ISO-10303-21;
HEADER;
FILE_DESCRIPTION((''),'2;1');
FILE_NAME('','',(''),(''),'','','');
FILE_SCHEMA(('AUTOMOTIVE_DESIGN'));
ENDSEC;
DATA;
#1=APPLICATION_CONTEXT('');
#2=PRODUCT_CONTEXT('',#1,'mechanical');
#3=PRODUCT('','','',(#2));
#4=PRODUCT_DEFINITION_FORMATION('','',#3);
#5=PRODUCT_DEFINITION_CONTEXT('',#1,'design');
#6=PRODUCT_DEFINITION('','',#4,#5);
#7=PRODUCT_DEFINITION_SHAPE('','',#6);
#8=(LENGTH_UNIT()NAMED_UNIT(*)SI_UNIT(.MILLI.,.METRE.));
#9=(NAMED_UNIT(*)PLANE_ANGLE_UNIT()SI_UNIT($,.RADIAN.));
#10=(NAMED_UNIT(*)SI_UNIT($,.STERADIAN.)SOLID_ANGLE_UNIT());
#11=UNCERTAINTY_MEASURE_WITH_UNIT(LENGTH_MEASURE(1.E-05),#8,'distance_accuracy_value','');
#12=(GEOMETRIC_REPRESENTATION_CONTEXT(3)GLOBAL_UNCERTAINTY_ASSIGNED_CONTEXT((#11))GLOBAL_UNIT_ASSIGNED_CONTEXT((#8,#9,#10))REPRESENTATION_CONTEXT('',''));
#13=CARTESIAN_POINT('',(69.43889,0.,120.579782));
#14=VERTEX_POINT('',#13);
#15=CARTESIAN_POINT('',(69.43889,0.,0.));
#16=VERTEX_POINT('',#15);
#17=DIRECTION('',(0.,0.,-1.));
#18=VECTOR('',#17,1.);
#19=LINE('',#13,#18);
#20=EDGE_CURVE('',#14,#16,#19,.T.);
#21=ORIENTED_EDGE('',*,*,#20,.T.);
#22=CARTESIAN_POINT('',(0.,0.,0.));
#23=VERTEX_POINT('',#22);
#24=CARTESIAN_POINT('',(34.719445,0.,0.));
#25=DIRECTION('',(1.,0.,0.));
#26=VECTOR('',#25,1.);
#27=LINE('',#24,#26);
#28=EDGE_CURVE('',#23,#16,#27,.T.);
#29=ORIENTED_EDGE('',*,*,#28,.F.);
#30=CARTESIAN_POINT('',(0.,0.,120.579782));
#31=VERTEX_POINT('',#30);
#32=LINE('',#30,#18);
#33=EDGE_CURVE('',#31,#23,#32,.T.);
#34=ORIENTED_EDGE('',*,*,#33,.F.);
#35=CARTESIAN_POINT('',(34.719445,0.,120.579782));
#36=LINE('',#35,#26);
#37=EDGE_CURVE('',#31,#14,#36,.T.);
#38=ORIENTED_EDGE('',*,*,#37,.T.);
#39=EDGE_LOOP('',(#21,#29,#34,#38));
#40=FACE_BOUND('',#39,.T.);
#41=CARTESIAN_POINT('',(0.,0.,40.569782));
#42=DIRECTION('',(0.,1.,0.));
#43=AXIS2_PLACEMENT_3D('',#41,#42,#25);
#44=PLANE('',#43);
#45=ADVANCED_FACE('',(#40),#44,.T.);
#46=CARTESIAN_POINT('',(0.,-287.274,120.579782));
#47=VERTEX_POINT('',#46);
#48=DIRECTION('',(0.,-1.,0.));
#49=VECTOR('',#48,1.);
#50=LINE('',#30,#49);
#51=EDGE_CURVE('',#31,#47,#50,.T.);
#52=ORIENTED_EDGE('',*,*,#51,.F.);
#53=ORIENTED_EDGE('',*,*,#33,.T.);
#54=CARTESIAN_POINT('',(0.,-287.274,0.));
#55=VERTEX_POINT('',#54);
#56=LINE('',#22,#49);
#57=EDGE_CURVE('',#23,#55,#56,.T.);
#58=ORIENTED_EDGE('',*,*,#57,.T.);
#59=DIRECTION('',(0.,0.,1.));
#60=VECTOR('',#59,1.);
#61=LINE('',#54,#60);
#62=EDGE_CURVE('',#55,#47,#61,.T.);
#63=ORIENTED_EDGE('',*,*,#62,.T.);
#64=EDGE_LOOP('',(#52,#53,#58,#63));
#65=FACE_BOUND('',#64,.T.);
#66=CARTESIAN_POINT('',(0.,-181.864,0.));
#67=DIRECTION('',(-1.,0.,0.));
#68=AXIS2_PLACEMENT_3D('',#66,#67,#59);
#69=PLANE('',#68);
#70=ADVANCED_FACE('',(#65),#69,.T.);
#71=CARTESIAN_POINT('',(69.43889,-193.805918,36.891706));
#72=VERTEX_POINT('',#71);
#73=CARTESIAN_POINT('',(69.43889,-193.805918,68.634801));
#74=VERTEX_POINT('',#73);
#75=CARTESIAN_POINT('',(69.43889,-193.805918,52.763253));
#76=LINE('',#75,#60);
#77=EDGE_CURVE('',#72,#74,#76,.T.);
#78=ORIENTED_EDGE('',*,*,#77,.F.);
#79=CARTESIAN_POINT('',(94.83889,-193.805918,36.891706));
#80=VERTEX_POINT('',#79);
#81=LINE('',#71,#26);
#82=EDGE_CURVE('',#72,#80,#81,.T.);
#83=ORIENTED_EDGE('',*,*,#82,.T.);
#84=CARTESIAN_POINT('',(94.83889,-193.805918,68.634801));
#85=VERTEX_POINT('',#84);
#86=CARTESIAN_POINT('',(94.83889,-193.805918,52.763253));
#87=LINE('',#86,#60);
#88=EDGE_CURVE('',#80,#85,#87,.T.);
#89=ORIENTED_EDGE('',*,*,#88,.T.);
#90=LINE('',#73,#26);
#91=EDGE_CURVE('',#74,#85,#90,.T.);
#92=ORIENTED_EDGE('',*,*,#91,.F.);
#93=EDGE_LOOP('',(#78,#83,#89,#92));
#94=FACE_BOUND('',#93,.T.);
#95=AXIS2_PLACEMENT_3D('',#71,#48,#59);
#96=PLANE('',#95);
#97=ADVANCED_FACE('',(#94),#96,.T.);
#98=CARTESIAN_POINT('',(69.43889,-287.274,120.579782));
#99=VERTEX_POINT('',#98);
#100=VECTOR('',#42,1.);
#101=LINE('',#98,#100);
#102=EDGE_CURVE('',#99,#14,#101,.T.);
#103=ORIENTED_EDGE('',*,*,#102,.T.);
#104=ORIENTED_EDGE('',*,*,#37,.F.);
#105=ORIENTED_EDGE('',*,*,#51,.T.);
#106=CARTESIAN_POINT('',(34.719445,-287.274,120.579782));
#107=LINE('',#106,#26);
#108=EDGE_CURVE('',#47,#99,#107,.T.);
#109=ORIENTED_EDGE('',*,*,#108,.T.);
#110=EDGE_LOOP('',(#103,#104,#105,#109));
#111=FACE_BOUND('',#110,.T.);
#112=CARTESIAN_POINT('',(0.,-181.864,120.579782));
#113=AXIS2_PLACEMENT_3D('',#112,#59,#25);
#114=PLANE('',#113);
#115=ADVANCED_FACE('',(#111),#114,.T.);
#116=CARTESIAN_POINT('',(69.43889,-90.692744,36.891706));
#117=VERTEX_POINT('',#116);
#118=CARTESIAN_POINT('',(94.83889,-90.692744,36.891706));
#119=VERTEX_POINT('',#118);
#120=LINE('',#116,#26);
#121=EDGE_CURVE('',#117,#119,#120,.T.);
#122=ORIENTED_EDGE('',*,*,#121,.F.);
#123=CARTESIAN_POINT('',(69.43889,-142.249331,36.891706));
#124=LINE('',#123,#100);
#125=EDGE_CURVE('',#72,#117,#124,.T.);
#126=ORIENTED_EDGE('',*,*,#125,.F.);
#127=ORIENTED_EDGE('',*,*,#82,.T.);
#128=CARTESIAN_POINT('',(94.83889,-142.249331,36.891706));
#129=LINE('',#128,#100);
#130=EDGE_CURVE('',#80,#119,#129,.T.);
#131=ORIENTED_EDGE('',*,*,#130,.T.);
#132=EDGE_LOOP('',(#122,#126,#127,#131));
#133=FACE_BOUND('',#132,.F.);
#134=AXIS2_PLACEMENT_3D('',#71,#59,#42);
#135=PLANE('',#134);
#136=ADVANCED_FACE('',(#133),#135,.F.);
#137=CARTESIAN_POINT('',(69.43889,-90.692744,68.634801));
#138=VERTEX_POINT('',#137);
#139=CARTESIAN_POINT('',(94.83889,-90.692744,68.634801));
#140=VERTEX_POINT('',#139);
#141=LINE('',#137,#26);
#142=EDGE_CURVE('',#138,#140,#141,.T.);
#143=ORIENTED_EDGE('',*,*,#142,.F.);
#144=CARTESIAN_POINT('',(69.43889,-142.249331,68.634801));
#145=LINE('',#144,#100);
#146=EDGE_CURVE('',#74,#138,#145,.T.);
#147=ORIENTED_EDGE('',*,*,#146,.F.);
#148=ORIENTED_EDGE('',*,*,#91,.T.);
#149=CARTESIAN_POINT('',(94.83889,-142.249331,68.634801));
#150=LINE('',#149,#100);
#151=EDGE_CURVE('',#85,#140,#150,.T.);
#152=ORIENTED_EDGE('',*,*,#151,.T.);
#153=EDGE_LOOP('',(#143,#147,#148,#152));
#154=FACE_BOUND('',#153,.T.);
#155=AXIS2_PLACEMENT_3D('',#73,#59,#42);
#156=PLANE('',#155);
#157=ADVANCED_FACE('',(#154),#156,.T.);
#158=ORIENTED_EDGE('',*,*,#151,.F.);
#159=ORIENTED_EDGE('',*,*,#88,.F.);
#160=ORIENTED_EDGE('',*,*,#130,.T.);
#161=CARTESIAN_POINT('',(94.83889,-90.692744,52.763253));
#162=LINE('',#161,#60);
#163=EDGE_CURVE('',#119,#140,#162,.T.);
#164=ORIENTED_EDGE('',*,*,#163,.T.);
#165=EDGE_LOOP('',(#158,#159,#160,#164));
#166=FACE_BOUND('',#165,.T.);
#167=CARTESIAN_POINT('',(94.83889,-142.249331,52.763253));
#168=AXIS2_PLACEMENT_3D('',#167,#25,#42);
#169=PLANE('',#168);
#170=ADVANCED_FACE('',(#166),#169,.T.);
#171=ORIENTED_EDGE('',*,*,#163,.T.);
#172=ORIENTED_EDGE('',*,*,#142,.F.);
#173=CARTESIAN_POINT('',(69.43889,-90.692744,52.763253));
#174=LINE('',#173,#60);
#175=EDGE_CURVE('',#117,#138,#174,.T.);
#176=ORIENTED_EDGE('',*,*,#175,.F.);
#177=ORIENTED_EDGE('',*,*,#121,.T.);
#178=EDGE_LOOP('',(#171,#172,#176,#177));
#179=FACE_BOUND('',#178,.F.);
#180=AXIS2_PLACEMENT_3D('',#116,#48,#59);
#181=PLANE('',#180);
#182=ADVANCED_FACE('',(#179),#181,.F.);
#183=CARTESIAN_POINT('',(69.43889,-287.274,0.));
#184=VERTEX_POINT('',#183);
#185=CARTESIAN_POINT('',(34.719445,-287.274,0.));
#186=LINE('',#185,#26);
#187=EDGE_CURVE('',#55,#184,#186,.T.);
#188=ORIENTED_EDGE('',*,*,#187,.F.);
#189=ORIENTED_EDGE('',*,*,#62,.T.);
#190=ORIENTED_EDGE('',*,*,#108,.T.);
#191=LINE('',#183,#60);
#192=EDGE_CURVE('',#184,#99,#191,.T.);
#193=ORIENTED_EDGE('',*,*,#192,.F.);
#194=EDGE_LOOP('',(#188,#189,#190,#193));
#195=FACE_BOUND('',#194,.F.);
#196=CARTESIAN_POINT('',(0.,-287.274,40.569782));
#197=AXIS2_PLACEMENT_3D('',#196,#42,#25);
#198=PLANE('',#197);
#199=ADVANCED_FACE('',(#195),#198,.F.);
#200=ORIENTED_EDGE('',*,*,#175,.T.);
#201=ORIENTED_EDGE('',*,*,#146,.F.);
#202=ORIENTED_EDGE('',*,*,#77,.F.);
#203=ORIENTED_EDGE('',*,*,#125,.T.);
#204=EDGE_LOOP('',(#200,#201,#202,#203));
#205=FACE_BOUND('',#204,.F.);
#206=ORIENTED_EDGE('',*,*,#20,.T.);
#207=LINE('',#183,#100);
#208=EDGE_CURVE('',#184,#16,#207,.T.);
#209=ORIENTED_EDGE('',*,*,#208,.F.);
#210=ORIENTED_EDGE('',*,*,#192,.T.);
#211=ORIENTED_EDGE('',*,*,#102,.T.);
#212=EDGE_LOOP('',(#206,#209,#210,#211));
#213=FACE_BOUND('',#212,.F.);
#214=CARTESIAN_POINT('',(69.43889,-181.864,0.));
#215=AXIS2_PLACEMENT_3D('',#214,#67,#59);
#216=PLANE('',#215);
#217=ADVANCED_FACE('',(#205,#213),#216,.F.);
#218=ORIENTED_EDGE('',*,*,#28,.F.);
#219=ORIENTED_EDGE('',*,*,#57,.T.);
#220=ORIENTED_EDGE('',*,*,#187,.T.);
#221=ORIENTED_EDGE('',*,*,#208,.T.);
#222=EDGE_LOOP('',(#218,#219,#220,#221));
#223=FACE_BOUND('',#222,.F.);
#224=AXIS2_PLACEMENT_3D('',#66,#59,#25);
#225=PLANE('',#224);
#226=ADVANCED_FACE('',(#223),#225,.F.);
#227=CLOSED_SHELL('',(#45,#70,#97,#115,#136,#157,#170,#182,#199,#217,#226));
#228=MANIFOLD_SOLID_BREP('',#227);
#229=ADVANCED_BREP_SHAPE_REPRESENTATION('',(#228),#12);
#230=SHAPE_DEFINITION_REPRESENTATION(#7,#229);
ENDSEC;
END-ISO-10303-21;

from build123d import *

# Parameters (mm, degrees)
F0_W     = 69.4388896227
F0_H     = 40.5697822571
F1_DEPTH = 181.864
F3_DEPTH = 80.01
F4_DEPTH = 105.41
F5_W     = 103.1131744385
F5_H     = 31.7430943251
F6_DEPTH = 25.4


# Not quite as in the source:
# - the program builds the solid bodies; features that only make, move or delete a surface that nothing else refers to are left out


with BuildPart() as f1:
    # F0 (on Front) → F1 (new body)
    with BuildSketch(Plane.XZ):
        with Locations((34.7194448113, 20.2848911285)):
            Rectangle(F0_W, F0_H)
    extrude(amount=F1_DEPTH)

    # F3 (add): a face of the model
    f3_faces = [f1.faces().sort_by_distance(p)[0] for p in [
        (34.7194448113, -90.932, 40.5697822571),
    ]]
    extrude(f3_faces, amount=F3_DEPTH)

    # F4 (add): a face of the model
    f4_faces = [f1.faces().sort_by_distance(p)[0] for p in [
        (34.7194448113, -181.864, 60.2898911285),
    ]]
    extrude(f4_faces, amount=F4_DEPTH)

    # F5 (on face) → F6 (join)
    with BuildSketch(Plane.YZ.offset(69.4388896227)):
        with Locations((-142.2493308783, 52.7632534504)):
            Rectangle(F5_W, F5_H)
    extrude(amount=F6_DEPTH)


solid = f1.part
